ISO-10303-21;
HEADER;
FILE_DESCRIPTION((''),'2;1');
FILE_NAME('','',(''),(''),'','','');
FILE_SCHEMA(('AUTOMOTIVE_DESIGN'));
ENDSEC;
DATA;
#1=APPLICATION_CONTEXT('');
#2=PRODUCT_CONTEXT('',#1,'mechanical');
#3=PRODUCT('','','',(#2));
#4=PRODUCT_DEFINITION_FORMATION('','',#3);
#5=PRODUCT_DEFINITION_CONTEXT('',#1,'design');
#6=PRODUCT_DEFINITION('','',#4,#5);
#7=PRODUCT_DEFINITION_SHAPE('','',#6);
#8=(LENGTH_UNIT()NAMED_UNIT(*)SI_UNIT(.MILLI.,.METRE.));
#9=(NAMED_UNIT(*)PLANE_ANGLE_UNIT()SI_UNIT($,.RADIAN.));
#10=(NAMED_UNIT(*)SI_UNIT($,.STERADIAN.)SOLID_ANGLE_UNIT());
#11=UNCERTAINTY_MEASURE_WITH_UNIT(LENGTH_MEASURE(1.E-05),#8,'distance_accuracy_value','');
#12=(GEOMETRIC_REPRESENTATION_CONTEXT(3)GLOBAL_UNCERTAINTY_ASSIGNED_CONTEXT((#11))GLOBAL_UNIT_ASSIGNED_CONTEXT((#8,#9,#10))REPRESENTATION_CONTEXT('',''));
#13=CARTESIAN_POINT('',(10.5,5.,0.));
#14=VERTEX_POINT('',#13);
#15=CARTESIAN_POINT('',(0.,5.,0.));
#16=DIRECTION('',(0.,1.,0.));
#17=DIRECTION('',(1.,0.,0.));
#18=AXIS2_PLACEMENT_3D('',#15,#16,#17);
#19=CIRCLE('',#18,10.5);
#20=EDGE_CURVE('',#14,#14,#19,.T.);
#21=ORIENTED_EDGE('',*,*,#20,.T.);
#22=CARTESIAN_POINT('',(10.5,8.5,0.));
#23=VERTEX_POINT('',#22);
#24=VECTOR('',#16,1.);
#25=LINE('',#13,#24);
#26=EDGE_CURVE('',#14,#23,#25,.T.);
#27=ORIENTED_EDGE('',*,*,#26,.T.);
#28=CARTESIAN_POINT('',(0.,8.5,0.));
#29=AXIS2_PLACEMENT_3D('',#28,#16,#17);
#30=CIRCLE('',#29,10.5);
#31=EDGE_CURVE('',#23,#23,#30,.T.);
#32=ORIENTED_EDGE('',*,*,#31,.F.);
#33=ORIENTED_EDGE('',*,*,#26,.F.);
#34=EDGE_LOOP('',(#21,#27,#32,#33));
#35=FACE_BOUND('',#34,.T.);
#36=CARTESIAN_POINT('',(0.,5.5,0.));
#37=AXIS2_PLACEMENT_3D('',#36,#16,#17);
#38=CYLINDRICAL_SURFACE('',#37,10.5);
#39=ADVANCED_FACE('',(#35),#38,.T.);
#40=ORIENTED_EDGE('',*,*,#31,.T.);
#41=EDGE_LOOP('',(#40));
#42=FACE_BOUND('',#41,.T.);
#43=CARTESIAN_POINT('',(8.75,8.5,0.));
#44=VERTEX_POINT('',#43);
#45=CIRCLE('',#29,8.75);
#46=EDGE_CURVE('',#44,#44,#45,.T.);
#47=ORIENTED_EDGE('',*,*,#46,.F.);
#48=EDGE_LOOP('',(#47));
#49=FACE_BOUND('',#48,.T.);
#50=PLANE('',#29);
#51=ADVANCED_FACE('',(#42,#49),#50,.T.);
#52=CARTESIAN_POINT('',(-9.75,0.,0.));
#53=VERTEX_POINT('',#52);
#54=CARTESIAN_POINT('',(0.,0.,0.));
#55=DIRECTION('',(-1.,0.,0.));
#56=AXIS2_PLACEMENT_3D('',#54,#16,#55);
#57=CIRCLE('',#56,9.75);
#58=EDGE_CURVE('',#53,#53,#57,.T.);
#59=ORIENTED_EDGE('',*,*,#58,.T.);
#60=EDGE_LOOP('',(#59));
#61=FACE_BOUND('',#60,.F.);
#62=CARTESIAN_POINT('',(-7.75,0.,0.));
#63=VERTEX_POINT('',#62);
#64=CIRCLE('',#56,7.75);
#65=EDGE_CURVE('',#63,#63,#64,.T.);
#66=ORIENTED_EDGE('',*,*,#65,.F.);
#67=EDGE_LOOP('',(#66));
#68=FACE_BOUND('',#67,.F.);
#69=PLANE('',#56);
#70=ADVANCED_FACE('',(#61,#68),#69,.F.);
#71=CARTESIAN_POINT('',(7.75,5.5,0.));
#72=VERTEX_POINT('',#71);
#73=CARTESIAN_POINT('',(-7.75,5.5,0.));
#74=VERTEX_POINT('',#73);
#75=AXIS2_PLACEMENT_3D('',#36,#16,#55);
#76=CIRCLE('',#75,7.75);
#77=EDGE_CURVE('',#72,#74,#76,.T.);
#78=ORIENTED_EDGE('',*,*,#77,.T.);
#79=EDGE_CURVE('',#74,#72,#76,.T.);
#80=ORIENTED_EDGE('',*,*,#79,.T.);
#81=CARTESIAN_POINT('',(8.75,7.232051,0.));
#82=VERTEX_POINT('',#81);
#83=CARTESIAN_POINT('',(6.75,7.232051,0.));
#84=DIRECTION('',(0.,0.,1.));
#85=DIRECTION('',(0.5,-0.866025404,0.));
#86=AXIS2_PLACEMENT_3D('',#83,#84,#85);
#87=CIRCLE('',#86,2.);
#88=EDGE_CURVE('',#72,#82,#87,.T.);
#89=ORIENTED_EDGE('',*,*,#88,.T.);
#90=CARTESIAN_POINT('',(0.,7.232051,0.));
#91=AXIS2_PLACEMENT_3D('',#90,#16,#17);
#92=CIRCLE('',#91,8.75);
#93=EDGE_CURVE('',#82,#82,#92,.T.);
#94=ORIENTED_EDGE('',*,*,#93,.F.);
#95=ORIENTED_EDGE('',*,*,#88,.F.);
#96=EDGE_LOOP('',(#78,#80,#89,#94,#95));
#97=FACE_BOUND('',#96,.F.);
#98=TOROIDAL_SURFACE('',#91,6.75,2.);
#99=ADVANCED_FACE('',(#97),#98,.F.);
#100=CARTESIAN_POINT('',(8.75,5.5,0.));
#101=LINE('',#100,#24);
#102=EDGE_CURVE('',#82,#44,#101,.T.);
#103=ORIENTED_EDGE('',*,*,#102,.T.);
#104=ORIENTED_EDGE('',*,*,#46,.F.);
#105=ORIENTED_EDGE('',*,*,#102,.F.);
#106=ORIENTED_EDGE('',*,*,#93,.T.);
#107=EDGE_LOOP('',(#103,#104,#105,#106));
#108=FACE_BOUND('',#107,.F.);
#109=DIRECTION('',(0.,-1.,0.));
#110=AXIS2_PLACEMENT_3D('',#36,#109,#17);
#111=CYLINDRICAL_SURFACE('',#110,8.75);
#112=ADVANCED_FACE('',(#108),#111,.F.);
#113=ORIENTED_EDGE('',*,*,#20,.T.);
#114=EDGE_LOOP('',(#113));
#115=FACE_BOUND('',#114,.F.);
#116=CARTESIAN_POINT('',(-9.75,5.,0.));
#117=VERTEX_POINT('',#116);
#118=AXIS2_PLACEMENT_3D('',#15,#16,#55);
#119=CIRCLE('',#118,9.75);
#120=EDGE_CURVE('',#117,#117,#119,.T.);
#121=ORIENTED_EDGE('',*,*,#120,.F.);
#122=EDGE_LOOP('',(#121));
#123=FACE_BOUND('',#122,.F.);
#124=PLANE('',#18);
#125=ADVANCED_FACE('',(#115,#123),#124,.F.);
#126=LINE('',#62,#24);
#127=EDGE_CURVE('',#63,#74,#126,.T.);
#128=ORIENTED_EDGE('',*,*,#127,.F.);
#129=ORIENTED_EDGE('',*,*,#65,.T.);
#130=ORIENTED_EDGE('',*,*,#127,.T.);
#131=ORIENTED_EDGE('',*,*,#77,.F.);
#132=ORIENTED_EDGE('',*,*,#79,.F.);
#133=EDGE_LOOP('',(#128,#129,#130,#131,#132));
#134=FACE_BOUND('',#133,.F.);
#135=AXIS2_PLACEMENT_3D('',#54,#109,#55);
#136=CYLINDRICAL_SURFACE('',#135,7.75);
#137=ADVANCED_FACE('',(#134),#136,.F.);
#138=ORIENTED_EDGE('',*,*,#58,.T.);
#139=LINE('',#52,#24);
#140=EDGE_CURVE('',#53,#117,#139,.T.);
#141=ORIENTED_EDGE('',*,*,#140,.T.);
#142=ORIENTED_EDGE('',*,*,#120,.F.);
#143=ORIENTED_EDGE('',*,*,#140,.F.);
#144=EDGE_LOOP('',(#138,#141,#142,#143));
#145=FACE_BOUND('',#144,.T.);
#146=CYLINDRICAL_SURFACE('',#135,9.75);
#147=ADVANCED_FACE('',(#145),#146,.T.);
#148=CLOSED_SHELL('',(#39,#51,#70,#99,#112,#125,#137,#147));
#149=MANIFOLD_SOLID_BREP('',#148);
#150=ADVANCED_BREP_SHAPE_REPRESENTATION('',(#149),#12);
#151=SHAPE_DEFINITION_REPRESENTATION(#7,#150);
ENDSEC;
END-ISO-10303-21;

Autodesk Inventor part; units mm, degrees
ref_plane "YZ Plane" through (0, 0, 0) normal (1, 0, 0) x (0, 1, 0)
ref_plane "XZ Plane" through (0, 0, 0) normal (0, 1, 0) x (-1, 0, 0)
ref_plane "XY Plane" through (0, 0, 0) normal (0, 0, 1) x (1, 0, 0)
sketch "Sketch1" plane through (0, 0, 0) normal (0, 1, 0) x (-1, 0, 0)
  circle A0 centre (0, 0) radius 7.75
  circle A1 centre (0, 0) radius 9.75
  dimension "d0" = 15.5
  dimension "d1" = 19.5
extrude "Extrusion1" add sketch "Sketch1" along normal blind 5.5
sketch "Sketch5" plane through (0, 5.5, 0) normal (0, 1, 0) x (1, 0, 0)
  circle A0 centre (0, 0) radius 10.5
  circle A1 centre (0, 0) radius 8.75
  dimension "d14" = 21
  dimension "d15" = 17.5
extrude "Extrusion5" add sketch "Sketch5" along normal blind 3
fillet "Fillet1" radius 2 1 edges at (-8.75, 5.5, 0)
move faces "Move1" translate (0, -0.5, 0) faces at (10.0539, 5.5, 1.6154)
properties part number "685ZZFlanged_Adapter"
